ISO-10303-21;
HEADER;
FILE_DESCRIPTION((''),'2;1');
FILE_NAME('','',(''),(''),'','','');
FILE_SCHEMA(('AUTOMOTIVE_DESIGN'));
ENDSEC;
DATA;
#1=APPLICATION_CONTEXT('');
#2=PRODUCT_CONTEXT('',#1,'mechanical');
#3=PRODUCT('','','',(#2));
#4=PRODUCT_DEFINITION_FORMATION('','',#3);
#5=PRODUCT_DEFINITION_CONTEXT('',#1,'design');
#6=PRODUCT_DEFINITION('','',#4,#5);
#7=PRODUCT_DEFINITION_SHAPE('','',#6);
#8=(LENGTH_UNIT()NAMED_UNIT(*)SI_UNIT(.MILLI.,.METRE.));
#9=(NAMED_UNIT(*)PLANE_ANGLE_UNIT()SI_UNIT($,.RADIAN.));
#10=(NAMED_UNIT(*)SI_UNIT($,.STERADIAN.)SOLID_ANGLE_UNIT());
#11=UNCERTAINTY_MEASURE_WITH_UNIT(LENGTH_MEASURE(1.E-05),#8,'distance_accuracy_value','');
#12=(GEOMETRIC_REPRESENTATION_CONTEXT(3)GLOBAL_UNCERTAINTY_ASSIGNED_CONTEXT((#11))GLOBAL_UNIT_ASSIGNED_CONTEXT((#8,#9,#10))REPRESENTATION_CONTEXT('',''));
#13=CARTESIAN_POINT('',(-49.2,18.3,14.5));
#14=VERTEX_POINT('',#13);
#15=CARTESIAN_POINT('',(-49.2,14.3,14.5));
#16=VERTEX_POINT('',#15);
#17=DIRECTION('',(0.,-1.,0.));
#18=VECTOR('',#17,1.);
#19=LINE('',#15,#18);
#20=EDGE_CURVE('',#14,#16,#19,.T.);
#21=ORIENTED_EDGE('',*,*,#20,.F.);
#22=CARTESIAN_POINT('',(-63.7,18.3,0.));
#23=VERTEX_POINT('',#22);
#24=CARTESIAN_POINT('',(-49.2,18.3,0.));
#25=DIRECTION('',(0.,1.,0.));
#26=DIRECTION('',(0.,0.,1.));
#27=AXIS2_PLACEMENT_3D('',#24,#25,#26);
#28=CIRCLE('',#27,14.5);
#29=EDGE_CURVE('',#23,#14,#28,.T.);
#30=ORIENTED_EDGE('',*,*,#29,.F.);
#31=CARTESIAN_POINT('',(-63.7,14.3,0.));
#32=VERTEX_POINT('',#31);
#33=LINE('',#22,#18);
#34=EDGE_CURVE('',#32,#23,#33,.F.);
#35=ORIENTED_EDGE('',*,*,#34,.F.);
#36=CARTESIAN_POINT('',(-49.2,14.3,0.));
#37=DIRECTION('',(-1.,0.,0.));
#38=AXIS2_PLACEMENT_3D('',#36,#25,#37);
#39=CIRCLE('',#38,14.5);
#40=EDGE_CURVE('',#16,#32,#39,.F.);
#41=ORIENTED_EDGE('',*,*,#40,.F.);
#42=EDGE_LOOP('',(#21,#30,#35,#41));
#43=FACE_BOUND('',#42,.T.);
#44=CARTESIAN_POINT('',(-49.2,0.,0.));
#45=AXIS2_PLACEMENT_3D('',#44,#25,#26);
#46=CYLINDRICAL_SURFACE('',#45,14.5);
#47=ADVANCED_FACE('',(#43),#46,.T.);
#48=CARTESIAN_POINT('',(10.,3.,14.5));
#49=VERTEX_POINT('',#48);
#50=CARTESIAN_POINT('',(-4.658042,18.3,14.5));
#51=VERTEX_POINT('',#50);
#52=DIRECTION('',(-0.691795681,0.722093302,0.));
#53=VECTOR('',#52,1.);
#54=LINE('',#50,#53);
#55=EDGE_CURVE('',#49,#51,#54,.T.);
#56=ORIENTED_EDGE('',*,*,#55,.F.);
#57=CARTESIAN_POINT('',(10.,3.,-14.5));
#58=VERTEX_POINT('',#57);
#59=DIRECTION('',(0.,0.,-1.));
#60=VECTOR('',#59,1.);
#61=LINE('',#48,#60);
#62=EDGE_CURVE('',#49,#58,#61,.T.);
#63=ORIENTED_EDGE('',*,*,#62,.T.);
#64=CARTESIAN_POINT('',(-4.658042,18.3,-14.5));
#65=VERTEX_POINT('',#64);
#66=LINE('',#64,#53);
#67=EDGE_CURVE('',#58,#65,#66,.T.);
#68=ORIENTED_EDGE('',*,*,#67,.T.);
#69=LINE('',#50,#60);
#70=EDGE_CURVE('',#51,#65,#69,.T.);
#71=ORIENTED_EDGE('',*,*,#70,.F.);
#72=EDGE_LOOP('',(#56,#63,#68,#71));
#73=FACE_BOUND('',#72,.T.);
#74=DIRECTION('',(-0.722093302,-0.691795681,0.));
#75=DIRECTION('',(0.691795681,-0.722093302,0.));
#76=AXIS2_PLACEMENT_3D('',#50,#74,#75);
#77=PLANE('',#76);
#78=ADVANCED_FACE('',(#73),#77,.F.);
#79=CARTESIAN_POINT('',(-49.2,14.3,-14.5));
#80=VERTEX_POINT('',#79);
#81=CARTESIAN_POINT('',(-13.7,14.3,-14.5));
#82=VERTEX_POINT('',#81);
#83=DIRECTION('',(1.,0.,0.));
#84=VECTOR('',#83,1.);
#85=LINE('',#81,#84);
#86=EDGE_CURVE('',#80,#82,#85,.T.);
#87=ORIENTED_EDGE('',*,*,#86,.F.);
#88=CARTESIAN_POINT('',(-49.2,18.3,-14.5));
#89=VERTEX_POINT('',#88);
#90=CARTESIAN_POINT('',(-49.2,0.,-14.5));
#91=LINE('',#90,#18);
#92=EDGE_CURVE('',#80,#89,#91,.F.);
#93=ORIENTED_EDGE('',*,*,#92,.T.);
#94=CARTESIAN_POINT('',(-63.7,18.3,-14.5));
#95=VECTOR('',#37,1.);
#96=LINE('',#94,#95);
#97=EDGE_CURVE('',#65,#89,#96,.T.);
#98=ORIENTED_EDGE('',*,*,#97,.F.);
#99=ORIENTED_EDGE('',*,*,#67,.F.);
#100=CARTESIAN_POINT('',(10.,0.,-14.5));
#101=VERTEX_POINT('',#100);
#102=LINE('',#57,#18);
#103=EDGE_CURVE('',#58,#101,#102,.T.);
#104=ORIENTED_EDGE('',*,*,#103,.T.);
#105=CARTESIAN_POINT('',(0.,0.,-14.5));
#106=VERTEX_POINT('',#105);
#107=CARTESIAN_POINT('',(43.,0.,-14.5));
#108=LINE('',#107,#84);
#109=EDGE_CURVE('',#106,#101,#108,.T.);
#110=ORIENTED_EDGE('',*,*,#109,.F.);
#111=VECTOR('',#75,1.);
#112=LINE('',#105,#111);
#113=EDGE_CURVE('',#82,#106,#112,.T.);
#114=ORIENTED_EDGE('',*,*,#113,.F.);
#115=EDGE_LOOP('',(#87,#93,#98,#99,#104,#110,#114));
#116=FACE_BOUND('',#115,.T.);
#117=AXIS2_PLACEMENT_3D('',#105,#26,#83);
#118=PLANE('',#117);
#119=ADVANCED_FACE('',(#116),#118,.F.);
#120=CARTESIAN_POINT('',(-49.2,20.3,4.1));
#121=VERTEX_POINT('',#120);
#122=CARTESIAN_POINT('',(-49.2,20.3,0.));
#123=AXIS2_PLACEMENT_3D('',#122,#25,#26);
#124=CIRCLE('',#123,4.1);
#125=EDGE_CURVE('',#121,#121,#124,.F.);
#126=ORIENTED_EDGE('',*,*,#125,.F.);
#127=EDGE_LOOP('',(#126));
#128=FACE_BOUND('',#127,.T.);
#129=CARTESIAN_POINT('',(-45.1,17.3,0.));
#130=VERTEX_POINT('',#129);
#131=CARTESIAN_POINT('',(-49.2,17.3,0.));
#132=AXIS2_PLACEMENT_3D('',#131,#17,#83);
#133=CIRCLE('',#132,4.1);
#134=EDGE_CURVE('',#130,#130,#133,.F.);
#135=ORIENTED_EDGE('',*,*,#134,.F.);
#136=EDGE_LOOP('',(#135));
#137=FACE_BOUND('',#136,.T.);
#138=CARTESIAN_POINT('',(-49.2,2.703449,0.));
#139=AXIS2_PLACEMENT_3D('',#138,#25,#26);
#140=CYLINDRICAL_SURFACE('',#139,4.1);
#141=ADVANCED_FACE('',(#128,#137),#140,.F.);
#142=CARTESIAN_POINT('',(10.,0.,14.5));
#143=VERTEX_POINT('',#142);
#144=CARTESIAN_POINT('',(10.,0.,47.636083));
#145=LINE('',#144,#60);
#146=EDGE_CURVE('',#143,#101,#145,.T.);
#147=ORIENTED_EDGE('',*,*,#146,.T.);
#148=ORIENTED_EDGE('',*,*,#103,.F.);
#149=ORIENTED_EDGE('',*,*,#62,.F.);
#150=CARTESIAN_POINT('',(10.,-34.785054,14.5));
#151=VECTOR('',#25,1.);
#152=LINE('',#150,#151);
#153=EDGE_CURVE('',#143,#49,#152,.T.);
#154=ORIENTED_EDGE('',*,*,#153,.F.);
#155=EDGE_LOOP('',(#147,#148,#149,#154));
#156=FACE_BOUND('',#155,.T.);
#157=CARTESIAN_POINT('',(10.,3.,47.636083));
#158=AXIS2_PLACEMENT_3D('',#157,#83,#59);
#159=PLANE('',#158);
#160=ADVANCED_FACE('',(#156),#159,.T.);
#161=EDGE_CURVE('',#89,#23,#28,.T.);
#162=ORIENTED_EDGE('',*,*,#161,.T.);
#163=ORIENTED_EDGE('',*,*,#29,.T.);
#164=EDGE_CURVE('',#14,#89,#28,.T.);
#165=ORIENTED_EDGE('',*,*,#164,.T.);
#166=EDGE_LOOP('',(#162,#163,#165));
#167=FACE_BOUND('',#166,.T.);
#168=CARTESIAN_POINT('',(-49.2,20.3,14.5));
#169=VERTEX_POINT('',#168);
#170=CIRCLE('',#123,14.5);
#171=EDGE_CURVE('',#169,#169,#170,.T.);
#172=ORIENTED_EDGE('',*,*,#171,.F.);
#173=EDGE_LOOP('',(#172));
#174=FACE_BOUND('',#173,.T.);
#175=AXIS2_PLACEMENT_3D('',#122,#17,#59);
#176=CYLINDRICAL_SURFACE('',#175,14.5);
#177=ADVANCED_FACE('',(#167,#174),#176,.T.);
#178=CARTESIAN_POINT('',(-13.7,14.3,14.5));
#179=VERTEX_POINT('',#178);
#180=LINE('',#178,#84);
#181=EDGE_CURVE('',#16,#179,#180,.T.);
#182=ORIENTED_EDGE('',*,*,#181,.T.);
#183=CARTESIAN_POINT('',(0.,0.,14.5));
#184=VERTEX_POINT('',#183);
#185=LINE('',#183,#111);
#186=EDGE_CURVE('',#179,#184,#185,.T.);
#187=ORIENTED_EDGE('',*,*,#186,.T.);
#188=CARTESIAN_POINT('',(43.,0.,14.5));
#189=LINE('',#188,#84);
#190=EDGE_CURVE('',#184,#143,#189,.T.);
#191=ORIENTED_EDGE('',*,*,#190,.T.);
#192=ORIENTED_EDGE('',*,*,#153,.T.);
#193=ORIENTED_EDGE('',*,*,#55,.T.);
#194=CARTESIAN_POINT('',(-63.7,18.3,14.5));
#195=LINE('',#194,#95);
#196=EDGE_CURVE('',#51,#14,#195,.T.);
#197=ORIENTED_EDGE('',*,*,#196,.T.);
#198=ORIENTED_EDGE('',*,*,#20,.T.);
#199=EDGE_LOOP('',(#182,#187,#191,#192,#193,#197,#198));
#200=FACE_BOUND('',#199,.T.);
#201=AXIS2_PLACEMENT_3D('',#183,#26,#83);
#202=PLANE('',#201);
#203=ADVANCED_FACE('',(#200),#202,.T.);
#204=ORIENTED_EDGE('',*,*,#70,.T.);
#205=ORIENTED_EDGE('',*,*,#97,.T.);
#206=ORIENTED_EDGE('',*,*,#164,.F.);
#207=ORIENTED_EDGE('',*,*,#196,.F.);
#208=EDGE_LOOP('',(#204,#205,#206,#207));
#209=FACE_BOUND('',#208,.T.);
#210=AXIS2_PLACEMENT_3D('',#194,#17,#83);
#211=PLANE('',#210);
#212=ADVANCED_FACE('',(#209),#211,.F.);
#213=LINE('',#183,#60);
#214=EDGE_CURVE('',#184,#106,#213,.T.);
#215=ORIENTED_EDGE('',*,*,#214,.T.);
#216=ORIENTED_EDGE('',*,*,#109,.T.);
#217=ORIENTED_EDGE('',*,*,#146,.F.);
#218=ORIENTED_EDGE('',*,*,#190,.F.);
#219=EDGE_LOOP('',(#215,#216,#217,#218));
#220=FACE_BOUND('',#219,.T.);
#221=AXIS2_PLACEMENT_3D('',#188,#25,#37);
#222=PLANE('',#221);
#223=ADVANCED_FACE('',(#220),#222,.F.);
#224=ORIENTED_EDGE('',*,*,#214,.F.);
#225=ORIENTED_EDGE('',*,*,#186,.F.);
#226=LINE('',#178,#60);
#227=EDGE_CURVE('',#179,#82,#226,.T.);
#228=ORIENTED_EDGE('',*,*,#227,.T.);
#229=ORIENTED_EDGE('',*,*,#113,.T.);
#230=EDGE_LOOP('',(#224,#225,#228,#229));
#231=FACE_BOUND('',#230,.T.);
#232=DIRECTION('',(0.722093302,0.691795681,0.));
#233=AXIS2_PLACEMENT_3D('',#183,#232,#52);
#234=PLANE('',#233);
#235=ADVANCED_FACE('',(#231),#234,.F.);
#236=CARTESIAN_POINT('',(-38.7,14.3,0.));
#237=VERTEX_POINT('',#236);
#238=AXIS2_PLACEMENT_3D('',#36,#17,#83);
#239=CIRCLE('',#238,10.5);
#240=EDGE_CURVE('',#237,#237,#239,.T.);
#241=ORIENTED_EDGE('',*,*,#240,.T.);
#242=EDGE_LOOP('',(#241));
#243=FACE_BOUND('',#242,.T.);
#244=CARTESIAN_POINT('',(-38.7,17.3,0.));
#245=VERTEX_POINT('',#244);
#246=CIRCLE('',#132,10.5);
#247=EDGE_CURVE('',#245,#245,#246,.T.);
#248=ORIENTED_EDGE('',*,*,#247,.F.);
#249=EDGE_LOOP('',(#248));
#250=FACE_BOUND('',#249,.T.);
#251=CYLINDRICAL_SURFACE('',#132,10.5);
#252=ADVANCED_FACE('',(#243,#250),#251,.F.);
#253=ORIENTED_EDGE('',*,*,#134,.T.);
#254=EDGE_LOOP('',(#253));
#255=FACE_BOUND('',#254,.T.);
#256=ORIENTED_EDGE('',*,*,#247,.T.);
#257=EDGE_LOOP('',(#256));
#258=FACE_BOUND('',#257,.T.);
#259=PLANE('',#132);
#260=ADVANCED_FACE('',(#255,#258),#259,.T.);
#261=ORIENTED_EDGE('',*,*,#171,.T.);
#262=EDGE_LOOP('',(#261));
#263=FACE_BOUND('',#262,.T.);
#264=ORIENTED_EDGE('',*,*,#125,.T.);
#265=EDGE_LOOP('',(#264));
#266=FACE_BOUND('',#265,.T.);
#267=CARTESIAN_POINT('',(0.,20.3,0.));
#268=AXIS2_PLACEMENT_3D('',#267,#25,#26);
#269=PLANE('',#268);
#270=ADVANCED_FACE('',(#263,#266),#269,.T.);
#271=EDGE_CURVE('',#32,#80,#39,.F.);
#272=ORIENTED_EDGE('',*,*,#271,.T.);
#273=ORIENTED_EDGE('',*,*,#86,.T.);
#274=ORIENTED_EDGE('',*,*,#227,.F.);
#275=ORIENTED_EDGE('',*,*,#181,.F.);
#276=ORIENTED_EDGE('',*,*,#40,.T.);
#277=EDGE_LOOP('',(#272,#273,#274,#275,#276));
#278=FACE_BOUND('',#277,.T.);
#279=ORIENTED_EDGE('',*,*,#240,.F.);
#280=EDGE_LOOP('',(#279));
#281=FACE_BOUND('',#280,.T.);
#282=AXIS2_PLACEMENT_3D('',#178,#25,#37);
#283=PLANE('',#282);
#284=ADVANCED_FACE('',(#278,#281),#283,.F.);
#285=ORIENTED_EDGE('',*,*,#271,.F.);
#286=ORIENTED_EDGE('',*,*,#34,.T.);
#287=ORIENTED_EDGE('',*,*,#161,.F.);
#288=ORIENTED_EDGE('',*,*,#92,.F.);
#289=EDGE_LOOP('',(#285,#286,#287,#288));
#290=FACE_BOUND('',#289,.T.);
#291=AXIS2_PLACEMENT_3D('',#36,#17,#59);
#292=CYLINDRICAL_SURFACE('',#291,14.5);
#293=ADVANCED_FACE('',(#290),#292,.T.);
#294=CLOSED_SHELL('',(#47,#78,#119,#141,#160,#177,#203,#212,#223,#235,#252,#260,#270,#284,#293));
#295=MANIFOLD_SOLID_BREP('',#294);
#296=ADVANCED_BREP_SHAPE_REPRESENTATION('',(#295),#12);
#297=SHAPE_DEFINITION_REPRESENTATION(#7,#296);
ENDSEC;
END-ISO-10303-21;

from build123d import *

# Parameters (mm, degrees)
BOSS_EXTRUDE1_DEPTH = 14.5
SKETCH3_R           = 4.1
CUT_EXTRUDE1_DEPTH  = 4
BOSS_EXTRUDE2_START = 2
SKETCH5_R           = 14.5
SKETCH5_R_2         = 4.1
BOSS_EXTRUDE2_DEPTH = 2
SKETCH6_R           = 1.55
CUT_EXTRUDE3_DEPTH  = 3
SKETCH7_R           = 10.5
CUT_EXTRUDE4_DEPTH  = 3
FILLET1_R           = 14.5
CUT_EXTRUDE5_DEPTH  = 3
SKETCH9_R           = 1.55
CUT_EXTRUDE6_DEPTH  = 3
SKETCH10_R          = 3
CUT_EXTRUDE7_DEPTH  = 2
SKETCH13_W          = 33
SKETCH13_H          = 3
CUT_EXTRUDE8_DEPTH  = 29


with BuildPart() as part:
    # Sketch2 → Boss-Extrude1 (new, symmetric)
    with BuildSketch(Plane.XY):
        Polygon((-63.7, 18.3), (-4.658041958, 18.3), (10, 3), (43, 3), (43, 0), (0, 0), (-13.7, 14.3), (-63.7, 14.3), align=None)
    extrude(amount=BOSS_EXTRUDE1_DEPTH, both=True)

    # Sketch3 → Cut-Extrude1 (cut)
    with BuildSketch(Plane(origin=(0, 18.3, 0), x_dir=(1, 0, 0), z_dir=(0, 1, 0))):
        with Locations(Location((-49.2, 0, 0), (0, 0, 270))):
            Circle(SKETCH3_R)
    extrude(amount=-CUT_EXTRUDE1_DEPTH, mode=Mode.SUBTRACT)

    # Sketch5 → Boss-Extrude2 (add)
    with BuildSketch(Plane(origin=(0, 18.3, 0), x_dir=(1, 0, 0), z_dir=(0, 1, 0)).offset(BOSS_EXTRUDE2_START)):
        with Locations(Location((-49.2, 0, 0), (0, 0, 270))):
            Circle(SKETCH5_R)
        with Locations(Location((-49.2, 0, 0), (0, 0, 270))):
            Circle(SKETCH5_R_2, mode=Mode.SUBTRACT)
    extrude(amount=-BOSS_EXTRUDE2_DEPTH)

    # Sketch6 → Cut-Extrude3 (cut)
    with BuildSketch(Plane(origin=(0, 3, 0), x_dir=(1, 0, 0), z_dir=(0, 1, 0))):
        with Locations(Location((22.248092992, -5.560176775, 0), (0, 0, 180))):
            Circle(SKETCH6_R)
        with Locations(Location((33.751907008, 5.560176775, 0), (0, 0, 180))):
            Circle(SKETCH6_R)
    extrude(amount=-CUT_EXTRUDE3_DEPTH, mode=Mode.SUBTRACT)

    # Sketch7 → Cut-Extrude4 (cut)
    with BuildSketch(Plane.XZ.offset(-14.3)):
        with Locations((-49.2, 0)):
            Circle(SKETCH7_R)
    extrude(amount=-CUT_EXTRUDE4_DEPTH, mode=Mode.SUBTRACT)

    # Fillet1
    fillet1_edges = [part.edges().sort_by_distance(p)[0] for p in [
        (-63.7, 16.3, -14.5),
        (-63.7, 16.3, 14.5),
    ]]
    fillet(fillet1_edges, radius=FILLET1_R - 0.0001)  # a hair under: the kernel refuses the full size

    # Sketch8 → Cut-Extrude5 (cut)
    with BuildSketch(Plane(origin=(0, 3, 0), x_dir=(1, 0, 0), z_dir=(0, 1, 0))):
        Polygon((16, -3.5), (10, -14.5), (16, -14.5), (43, -14.5), (43, -3.5), align=None)
    extrude(amount=-CUT_EXTRUDE5_DEPTH, mode=Mode.SUBTRACT)

    # Sketch9 → Cut-Extrude6 (cut)
    with BuildSketch(Plane(origin=(0, 3, 0), x_dir=(1, 0, 0), z_dir=(0, 1, 0))):
        with Locations(Location((22.251907008, 5.560176775, 0), (0, 0, 270))):
            Circle(SKETCH9_R)
    extrude(amount=-CUT_EXTRUDE6_DEPTH, mode=Mode.SUBTRACT)

    # Sketch10 → Cut-Extrude7 (cut)
    with BuildSketch(Plane.XZ):
        with Locations((22.251907008, -5.560176775)):
            Circle(SKETCH10_R)
        with Locations((33.751907008, -5.560176775)):
            Circle(SKETCH10_R)
    extrude(amount=-CUT_EXTRUDE7_DEPTH, mode=Mode.SUBTRACT)

    # Sketch13 → Cut-Extrude8 (cut)
    with BuildSketch(Plane(origin=(0, 0, -14.5), x_dir=(-1, 0, 0), z_dir=(0, 0, -1))):
        with Locations((-26.5, 1.5)):
            Rectangle(SKETCH13_W, SKETCH13_H)
    extrude(amount=-CUT_EXTRUDE8_DEPTH, mode=Mode.SUBTRACT)


solid = part.part
